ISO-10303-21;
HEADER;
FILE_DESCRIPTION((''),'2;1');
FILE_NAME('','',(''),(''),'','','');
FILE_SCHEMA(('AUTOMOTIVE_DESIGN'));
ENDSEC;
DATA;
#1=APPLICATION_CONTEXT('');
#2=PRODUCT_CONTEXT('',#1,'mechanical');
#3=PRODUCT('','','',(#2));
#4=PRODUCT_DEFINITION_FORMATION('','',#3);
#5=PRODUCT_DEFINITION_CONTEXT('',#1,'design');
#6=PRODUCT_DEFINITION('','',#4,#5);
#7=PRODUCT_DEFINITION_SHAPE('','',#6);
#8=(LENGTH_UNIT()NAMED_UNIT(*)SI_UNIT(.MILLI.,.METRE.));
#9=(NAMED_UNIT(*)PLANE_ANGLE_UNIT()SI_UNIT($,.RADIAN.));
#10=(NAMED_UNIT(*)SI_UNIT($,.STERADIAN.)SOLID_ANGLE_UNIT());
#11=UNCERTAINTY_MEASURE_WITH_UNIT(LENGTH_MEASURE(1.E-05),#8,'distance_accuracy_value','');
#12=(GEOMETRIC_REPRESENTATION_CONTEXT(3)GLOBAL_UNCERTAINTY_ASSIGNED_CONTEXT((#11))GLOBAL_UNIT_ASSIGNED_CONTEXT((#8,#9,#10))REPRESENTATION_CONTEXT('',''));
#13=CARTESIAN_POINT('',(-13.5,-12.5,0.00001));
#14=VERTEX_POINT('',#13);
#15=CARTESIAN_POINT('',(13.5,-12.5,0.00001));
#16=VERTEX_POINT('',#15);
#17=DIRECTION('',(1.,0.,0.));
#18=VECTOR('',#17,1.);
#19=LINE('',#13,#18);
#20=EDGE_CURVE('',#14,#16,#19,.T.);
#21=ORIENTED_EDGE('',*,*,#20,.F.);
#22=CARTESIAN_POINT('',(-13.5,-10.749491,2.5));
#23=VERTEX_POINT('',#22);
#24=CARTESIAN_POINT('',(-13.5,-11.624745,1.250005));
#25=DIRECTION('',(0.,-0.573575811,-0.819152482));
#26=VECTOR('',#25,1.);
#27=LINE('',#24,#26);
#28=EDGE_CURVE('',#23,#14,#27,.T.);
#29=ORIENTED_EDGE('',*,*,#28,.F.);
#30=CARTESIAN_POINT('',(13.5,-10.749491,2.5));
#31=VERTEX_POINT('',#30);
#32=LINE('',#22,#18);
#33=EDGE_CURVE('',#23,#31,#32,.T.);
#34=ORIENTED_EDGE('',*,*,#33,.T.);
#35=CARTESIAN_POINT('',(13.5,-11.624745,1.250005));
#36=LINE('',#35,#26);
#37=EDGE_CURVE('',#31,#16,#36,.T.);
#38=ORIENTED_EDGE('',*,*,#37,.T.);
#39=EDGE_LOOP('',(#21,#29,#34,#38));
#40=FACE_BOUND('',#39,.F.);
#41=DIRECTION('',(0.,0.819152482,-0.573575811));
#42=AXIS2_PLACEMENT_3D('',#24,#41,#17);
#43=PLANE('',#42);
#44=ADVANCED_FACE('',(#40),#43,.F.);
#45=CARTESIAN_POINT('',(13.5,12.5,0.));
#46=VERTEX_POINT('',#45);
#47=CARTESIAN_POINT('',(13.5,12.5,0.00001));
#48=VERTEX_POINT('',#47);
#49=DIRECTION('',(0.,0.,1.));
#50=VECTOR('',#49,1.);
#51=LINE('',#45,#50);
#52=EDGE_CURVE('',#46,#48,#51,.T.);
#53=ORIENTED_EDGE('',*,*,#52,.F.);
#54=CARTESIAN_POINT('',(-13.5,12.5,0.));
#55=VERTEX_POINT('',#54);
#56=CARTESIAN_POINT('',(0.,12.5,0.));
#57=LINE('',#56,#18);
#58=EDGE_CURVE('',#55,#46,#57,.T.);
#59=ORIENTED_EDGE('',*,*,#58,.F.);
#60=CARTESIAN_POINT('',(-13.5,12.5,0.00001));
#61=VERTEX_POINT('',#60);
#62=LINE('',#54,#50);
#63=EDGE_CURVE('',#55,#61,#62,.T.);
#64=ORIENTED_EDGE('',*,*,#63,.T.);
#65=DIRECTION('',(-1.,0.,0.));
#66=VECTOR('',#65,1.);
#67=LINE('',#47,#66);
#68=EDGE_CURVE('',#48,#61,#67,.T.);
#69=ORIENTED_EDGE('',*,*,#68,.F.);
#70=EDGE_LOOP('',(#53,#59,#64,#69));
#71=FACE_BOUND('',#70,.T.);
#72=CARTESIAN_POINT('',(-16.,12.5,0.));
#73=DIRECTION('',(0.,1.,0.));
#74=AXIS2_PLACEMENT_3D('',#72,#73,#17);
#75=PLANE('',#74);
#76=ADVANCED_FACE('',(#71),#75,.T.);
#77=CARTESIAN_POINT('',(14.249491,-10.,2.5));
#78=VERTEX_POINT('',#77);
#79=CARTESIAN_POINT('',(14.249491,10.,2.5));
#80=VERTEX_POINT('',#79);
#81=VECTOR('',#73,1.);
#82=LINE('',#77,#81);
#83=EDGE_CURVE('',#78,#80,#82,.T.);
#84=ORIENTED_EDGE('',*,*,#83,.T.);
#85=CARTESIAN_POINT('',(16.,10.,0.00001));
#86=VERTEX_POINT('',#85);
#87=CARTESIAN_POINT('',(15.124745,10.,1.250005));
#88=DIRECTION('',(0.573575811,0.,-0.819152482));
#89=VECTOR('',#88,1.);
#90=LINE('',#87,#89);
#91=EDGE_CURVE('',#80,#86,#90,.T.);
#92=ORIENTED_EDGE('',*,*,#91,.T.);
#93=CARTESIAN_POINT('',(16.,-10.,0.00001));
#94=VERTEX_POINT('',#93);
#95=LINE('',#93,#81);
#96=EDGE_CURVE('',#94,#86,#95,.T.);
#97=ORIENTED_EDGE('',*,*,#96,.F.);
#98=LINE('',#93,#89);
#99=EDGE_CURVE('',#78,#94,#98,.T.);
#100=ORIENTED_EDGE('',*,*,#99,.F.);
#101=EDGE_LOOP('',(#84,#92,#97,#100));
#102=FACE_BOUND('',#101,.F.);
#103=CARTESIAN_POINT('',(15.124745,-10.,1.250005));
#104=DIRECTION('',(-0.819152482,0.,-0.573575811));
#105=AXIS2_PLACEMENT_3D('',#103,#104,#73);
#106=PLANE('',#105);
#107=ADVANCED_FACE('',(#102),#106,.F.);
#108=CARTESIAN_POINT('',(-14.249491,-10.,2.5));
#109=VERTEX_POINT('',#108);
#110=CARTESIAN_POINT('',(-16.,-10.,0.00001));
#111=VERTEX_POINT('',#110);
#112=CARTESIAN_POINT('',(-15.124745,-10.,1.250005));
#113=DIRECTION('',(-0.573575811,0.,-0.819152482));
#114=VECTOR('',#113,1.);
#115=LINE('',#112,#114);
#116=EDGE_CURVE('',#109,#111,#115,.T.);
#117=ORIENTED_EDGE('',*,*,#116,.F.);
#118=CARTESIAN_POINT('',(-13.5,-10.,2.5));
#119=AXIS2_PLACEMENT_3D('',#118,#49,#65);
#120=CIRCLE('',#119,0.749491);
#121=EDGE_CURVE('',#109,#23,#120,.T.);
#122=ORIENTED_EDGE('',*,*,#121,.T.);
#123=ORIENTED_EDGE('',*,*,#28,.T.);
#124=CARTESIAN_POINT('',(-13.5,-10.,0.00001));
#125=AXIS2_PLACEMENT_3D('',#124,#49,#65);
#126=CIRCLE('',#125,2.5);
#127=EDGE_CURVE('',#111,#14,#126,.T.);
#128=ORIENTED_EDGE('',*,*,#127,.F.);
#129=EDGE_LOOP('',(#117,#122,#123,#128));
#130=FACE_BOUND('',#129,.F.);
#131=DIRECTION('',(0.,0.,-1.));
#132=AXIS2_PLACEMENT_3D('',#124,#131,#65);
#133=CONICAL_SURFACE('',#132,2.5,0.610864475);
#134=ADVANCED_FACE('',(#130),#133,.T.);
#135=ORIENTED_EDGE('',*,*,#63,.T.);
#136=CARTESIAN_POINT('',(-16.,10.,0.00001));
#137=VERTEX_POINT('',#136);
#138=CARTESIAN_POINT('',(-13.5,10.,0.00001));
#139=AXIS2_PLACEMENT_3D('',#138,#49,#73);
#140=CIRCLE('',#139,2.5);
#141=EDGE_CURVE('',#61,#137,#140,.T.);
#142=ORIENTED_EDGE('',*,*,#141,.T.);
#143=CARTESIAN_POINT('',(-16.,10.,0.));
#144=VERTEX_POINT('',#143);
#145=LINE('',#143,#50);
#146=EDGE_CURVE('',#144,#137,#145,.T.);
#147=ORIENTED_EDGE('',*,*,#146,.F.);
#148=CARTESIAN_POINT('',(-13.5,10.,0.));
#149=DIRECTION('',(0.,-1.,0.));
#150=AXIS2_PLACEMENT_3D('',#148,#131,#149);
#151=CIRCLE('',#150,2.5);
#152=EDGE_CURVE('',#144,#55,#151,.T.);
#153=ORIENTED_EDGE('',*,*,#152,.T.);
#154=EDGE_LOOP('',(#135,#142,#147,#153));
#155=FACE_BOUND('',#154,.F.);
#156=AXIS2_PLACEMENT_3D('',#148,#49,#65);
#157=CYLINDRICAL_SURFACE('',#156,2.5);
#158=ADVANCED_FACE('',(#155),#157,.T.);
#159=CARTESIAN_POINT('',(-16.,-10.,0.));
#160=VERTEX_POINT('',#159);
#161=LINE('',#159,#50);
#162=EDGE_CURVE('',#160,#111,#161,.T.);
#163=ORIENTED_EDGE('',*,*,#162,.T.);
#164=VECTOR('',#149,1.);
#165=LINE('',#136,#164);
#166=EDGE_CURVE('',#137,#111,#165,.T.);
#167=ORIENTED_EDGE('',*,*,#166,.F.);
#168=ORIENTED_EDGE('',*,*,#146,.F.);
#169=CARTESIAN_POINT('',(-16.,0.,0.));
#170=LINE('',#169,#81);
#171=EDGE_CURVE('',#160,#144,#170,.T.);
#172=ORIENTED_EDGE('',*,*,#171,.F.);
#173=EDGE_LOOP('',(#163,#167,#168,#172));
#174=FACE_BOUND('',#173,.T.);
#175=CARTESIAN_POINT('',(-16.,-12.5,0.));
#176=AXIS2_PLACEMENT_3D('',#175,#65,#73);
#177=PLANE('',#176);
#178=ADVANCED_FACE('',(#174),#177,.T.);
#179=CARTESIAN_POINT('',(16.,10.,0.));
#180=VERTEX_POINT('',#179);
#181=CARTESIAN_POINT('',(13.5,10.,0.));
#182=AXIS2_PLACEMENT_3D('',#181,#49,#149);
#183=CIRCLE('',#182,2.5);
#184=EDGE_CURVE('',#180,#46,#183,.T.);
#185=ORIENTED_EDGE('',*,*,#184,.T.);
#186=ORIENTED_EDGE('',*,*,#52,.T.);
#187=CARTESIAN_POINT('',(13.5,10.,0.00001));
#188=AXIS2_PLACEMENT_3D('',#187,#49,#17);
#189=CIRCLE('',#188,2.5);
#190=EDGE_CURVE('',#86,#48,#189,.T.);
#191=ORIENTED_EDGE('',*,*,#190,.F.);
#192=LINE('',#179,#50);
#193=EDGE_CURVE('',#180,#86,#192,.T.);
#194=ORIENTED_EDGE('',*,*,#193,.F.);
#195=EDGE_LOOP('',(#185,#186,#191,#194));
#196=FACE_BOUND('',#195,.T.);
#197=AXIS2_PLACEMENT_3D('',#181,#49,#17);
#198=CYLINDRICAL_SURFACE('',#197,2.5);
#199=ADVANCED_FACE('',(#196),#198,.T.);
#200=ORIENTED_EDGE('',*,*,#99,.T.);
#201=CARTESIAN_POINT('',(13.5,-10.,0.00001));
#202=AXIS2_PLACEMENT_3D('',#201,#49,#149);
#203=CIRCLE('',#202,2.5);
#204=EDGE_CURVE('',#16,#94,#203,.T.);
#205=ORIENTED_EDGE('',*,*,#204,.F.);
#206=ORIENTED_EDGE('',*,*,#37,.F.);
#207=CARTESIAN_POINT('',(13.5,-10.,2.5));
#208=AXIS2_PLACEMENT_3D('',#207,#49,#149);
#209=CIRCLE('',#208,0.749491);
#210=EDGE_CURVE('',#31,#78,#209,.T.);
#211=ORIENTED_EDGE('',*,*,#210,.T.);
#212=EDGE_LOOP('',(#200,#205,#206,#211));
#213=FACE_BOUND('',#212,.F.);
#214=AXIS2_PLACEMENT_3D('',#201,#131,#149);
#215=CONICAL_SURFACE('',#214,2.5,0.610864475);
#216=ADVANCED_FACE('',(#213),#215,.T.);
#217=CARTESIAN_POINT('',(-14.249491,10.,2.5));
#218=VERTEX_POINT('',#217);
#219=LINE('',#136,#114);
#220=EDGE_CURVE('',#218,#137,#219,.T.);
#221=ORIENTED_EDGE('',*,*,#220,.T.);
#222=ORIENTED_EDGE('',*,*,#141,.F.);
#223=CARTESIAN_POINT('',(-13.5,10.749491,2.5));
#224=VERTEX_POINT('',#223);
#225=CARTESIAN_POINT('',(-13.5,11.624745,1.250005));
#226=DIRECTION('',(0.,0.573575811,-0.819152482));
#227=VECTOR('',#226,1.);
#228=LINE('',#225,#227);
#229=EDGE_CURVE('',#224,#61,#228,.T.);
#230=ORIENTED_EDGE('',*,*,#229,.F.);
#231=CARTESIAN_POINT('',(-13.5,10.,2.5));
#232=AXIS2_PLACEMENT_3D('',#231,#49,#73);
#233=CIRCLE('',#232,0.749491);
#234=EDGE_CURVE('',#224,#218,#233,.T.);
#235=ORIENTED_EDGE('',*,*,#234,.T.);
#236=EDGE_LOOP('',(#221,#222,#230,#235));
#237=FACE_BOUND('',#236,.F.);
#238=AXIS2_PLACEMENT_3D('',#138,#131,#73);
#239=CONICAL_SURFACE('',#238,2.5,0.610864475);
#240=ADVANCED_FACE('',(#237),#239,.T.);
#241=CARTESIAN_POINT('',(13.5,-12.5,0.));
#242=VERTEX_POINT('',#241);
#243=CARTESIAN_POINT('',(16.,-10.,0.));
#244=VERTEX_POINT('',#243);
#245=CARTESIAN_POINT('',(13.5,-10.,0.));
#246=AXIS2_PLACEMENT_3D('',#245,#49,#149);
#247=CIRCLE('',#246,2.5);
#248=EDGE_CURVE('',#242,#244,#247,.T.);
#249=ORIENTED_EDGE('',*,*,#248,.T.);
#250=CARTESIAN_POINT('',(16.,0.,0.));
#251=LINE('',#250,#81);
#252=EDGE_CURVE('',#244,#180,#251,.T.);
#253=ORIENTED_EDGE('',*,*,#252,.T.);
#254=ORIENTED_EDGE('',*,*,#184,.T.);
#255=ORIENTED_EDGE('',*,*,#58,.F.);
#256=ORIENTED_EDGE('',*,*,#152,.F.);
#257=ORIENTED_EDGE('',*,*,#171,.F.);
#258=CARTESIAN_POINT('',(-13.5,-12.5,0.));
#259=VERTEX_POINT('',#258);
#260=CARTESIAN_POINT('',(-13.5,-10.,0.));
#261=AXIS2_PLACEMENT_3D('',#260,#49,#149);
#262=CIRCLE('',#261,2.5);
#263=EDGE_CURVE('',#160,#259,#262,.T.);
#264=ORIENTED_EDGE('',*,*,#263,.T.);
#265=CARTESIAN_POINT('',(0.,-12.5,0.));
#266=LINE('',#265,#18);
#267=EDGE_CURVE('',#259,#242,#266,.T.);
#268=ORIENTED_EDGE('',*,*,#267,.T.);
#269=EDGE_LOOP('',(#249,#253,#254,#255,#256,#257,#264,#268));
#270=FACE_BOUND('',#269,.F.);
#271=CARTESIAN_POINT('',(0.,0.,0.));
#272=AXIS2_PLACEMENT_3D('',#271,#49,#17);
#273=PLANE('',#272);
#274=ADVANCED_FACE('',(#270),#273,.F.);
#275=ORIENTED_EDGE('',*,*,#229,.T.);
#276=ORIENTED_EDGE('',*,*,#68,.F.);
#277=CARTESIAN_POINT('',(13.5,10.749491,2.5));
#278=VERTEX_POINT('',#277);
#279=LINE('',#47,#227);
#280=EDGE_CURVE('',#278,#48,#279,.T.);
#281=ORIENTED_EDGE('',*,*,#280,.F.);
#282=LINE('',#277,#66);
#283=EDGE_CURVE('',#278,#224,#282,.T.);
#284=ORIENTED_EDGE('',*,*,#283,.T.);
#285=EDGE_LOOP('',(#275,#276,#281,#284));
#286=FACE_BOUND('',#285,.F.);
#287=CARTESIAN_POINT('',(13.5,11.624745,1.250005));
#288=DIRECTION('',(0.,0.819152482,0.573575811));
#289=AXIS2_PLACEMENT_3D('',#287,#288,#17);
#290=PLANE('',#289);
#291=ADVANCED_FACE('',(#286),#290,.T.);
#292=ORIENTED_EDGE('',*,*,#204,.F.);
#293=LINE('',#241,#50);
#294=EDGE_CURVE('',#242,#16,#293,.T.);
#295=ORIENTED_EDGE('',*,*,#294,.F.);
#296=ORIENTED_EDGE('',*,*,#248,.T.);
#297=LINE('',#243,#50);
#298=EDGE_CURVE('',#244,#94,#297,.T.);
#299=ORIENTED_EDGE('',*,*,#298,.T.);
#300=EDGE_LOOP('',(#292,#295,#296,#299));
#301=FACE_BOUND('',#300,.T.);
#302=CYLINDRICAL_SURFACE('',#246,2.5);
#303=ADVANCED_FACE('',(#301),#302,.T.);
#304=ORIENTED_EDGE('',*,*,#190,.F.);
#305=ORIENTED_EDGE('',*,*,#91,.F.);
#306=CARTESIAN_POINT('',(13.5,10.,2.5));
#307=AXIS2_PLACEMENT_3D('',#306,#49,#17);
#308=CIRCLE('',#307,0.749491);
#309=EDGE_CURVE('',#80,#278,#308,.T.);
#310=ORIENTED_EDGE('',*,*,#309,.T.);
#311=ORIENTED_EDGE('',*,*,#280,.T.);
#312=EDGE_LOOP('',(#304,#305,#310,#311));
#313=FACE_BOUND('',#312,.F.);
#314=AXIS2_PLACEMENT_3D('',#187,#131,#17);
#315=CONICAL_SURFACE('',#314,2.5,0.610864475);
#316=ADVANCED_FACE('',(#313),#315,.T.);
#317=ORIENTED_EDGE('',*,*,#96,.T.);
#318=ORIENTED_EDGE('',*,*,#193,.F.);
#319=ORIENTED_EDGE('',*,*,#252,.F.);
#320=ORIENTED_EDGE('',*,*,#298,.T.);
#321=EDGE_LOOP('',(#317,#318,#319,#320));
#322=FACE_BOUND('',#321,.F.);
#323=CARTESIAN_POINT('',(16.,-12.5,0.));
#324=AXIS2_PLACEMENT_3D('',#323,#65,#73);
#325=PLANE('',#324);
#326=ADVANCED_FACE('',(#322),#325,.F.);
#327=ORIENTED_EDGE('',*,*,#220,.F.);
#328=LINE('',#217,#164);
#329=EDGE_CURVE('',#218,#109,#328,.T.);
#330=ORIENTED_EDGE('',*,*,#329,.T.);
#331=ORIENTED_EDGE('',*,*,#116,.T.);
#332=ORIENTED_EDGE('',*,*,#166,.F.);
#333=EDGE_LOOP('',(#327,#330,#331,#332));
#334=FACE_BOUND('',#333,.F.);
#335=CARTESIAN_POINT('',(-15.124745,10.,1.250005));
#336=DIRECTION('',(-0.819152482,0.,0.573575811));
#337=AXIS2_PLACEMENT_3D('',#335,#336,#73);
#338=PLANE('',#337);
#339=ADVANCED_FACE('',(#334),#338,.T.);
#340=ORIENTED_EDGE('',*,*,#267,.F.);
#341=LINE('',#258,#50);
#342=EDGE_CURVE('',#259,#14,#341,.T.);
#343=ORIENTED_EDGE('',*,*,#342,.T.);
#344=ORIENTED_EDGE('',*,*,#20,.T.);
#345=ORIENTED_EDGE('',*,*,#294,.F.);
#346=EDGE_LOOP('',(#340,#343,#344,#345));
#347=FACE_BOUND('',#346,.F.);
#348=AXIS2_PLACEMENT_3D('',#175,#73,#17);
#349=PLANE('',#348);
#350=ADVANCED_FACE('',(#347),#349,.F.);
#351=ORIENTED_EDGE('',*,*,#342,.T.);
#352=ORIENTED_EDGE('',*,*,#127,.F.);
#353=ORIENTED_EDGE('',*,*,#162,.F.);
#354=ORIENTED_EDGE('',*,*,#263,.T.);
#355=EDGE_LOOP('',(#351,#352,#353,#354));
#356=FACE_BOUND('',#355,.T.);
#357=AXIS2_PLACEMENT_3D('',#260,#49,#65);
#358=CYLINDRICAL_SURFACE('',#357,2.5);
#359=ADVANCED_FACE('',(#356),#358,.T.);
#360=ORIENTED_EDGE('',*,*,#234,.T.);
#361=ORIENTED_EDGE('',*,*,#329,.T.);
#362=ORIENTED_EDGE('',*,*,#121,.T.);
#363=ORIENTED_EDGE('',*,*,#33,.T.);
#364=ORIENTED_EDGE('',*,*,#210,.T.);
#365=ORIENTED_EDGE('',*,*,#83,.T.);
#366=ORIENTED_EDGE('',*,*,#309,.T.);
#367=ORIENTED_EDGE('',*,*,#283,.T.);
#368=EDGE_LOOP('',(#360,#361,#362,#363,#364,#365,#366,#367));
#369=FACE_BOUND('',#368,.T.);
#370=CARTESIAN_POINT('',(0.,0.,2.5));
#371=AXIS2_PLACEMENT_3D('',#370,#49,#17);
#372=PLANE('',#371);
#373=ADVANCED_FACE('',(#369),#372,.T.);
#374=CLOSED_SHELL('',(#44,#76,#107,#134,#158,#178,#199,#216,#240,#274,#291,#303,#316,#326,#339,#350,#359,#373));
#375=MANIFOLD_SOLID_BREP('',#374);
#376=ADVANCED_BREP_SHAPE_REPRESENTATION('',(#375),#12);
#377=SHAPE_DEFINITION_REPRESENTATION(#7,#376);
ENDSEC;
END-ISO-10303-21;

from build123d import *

# Parameters (mm, degrees)
F0_W     = 32
F0_H     = 25
F1_DEPTH = 2.5
F2_R     = 2.5
F3_SIZE2 = 2.49999
F3_SIZE  = 1.750509


# Not quite as in the source:
# - a fillet or chamfer is up to 0.001 mm smaller than in the source, because OpenCascade refuses the exact size


with BuildPart() as f1:
    # F0 (on Top) → F1 (new body)
    with BuildSketch(Plane.XY):
        Rectangle(F0_W, F0_H)
    extrude(amount=F1_DEPTH)

    # F2
    f2_edges = [f1.edges().sort_by_distance(p)[0] for p in [
        (-16, -12.5, 1.25),
        (16, -12.5, 1.25),
        (16, 12.5, 1.25),
        (-16, 12.5, 1.25),
    ]]
    fillet(f2_edges, radius=F2_R)

    # F3 (size 1.7505188455 and 2.5 in the source; OpenCascade refuses exactly that, so slightly less here)
    f3_edges = [f1.edges().sort_by_distance(p)[0] for p in [
        (0, -12.5, 2.5),
        (-16, 0, 2.5),
        (15.267767, -11.767767, 2.5),
        (16, 0, 2.5),
        (15.267767, 11.767767, 2.5),
        (0, 12.5, 2.5),
        (-15.267767, 11.767767, 2.5),
        (-15.267767, -11.767767, 2.5),
    ]]
    f3_side = f1.faces().sort_by_distance((0, 0, 2.5))[0]
    chamfer(f3_edges, length=F3_SIZE, length2=F3_SIZE2, reference=f3_side)


solid = f1.part
